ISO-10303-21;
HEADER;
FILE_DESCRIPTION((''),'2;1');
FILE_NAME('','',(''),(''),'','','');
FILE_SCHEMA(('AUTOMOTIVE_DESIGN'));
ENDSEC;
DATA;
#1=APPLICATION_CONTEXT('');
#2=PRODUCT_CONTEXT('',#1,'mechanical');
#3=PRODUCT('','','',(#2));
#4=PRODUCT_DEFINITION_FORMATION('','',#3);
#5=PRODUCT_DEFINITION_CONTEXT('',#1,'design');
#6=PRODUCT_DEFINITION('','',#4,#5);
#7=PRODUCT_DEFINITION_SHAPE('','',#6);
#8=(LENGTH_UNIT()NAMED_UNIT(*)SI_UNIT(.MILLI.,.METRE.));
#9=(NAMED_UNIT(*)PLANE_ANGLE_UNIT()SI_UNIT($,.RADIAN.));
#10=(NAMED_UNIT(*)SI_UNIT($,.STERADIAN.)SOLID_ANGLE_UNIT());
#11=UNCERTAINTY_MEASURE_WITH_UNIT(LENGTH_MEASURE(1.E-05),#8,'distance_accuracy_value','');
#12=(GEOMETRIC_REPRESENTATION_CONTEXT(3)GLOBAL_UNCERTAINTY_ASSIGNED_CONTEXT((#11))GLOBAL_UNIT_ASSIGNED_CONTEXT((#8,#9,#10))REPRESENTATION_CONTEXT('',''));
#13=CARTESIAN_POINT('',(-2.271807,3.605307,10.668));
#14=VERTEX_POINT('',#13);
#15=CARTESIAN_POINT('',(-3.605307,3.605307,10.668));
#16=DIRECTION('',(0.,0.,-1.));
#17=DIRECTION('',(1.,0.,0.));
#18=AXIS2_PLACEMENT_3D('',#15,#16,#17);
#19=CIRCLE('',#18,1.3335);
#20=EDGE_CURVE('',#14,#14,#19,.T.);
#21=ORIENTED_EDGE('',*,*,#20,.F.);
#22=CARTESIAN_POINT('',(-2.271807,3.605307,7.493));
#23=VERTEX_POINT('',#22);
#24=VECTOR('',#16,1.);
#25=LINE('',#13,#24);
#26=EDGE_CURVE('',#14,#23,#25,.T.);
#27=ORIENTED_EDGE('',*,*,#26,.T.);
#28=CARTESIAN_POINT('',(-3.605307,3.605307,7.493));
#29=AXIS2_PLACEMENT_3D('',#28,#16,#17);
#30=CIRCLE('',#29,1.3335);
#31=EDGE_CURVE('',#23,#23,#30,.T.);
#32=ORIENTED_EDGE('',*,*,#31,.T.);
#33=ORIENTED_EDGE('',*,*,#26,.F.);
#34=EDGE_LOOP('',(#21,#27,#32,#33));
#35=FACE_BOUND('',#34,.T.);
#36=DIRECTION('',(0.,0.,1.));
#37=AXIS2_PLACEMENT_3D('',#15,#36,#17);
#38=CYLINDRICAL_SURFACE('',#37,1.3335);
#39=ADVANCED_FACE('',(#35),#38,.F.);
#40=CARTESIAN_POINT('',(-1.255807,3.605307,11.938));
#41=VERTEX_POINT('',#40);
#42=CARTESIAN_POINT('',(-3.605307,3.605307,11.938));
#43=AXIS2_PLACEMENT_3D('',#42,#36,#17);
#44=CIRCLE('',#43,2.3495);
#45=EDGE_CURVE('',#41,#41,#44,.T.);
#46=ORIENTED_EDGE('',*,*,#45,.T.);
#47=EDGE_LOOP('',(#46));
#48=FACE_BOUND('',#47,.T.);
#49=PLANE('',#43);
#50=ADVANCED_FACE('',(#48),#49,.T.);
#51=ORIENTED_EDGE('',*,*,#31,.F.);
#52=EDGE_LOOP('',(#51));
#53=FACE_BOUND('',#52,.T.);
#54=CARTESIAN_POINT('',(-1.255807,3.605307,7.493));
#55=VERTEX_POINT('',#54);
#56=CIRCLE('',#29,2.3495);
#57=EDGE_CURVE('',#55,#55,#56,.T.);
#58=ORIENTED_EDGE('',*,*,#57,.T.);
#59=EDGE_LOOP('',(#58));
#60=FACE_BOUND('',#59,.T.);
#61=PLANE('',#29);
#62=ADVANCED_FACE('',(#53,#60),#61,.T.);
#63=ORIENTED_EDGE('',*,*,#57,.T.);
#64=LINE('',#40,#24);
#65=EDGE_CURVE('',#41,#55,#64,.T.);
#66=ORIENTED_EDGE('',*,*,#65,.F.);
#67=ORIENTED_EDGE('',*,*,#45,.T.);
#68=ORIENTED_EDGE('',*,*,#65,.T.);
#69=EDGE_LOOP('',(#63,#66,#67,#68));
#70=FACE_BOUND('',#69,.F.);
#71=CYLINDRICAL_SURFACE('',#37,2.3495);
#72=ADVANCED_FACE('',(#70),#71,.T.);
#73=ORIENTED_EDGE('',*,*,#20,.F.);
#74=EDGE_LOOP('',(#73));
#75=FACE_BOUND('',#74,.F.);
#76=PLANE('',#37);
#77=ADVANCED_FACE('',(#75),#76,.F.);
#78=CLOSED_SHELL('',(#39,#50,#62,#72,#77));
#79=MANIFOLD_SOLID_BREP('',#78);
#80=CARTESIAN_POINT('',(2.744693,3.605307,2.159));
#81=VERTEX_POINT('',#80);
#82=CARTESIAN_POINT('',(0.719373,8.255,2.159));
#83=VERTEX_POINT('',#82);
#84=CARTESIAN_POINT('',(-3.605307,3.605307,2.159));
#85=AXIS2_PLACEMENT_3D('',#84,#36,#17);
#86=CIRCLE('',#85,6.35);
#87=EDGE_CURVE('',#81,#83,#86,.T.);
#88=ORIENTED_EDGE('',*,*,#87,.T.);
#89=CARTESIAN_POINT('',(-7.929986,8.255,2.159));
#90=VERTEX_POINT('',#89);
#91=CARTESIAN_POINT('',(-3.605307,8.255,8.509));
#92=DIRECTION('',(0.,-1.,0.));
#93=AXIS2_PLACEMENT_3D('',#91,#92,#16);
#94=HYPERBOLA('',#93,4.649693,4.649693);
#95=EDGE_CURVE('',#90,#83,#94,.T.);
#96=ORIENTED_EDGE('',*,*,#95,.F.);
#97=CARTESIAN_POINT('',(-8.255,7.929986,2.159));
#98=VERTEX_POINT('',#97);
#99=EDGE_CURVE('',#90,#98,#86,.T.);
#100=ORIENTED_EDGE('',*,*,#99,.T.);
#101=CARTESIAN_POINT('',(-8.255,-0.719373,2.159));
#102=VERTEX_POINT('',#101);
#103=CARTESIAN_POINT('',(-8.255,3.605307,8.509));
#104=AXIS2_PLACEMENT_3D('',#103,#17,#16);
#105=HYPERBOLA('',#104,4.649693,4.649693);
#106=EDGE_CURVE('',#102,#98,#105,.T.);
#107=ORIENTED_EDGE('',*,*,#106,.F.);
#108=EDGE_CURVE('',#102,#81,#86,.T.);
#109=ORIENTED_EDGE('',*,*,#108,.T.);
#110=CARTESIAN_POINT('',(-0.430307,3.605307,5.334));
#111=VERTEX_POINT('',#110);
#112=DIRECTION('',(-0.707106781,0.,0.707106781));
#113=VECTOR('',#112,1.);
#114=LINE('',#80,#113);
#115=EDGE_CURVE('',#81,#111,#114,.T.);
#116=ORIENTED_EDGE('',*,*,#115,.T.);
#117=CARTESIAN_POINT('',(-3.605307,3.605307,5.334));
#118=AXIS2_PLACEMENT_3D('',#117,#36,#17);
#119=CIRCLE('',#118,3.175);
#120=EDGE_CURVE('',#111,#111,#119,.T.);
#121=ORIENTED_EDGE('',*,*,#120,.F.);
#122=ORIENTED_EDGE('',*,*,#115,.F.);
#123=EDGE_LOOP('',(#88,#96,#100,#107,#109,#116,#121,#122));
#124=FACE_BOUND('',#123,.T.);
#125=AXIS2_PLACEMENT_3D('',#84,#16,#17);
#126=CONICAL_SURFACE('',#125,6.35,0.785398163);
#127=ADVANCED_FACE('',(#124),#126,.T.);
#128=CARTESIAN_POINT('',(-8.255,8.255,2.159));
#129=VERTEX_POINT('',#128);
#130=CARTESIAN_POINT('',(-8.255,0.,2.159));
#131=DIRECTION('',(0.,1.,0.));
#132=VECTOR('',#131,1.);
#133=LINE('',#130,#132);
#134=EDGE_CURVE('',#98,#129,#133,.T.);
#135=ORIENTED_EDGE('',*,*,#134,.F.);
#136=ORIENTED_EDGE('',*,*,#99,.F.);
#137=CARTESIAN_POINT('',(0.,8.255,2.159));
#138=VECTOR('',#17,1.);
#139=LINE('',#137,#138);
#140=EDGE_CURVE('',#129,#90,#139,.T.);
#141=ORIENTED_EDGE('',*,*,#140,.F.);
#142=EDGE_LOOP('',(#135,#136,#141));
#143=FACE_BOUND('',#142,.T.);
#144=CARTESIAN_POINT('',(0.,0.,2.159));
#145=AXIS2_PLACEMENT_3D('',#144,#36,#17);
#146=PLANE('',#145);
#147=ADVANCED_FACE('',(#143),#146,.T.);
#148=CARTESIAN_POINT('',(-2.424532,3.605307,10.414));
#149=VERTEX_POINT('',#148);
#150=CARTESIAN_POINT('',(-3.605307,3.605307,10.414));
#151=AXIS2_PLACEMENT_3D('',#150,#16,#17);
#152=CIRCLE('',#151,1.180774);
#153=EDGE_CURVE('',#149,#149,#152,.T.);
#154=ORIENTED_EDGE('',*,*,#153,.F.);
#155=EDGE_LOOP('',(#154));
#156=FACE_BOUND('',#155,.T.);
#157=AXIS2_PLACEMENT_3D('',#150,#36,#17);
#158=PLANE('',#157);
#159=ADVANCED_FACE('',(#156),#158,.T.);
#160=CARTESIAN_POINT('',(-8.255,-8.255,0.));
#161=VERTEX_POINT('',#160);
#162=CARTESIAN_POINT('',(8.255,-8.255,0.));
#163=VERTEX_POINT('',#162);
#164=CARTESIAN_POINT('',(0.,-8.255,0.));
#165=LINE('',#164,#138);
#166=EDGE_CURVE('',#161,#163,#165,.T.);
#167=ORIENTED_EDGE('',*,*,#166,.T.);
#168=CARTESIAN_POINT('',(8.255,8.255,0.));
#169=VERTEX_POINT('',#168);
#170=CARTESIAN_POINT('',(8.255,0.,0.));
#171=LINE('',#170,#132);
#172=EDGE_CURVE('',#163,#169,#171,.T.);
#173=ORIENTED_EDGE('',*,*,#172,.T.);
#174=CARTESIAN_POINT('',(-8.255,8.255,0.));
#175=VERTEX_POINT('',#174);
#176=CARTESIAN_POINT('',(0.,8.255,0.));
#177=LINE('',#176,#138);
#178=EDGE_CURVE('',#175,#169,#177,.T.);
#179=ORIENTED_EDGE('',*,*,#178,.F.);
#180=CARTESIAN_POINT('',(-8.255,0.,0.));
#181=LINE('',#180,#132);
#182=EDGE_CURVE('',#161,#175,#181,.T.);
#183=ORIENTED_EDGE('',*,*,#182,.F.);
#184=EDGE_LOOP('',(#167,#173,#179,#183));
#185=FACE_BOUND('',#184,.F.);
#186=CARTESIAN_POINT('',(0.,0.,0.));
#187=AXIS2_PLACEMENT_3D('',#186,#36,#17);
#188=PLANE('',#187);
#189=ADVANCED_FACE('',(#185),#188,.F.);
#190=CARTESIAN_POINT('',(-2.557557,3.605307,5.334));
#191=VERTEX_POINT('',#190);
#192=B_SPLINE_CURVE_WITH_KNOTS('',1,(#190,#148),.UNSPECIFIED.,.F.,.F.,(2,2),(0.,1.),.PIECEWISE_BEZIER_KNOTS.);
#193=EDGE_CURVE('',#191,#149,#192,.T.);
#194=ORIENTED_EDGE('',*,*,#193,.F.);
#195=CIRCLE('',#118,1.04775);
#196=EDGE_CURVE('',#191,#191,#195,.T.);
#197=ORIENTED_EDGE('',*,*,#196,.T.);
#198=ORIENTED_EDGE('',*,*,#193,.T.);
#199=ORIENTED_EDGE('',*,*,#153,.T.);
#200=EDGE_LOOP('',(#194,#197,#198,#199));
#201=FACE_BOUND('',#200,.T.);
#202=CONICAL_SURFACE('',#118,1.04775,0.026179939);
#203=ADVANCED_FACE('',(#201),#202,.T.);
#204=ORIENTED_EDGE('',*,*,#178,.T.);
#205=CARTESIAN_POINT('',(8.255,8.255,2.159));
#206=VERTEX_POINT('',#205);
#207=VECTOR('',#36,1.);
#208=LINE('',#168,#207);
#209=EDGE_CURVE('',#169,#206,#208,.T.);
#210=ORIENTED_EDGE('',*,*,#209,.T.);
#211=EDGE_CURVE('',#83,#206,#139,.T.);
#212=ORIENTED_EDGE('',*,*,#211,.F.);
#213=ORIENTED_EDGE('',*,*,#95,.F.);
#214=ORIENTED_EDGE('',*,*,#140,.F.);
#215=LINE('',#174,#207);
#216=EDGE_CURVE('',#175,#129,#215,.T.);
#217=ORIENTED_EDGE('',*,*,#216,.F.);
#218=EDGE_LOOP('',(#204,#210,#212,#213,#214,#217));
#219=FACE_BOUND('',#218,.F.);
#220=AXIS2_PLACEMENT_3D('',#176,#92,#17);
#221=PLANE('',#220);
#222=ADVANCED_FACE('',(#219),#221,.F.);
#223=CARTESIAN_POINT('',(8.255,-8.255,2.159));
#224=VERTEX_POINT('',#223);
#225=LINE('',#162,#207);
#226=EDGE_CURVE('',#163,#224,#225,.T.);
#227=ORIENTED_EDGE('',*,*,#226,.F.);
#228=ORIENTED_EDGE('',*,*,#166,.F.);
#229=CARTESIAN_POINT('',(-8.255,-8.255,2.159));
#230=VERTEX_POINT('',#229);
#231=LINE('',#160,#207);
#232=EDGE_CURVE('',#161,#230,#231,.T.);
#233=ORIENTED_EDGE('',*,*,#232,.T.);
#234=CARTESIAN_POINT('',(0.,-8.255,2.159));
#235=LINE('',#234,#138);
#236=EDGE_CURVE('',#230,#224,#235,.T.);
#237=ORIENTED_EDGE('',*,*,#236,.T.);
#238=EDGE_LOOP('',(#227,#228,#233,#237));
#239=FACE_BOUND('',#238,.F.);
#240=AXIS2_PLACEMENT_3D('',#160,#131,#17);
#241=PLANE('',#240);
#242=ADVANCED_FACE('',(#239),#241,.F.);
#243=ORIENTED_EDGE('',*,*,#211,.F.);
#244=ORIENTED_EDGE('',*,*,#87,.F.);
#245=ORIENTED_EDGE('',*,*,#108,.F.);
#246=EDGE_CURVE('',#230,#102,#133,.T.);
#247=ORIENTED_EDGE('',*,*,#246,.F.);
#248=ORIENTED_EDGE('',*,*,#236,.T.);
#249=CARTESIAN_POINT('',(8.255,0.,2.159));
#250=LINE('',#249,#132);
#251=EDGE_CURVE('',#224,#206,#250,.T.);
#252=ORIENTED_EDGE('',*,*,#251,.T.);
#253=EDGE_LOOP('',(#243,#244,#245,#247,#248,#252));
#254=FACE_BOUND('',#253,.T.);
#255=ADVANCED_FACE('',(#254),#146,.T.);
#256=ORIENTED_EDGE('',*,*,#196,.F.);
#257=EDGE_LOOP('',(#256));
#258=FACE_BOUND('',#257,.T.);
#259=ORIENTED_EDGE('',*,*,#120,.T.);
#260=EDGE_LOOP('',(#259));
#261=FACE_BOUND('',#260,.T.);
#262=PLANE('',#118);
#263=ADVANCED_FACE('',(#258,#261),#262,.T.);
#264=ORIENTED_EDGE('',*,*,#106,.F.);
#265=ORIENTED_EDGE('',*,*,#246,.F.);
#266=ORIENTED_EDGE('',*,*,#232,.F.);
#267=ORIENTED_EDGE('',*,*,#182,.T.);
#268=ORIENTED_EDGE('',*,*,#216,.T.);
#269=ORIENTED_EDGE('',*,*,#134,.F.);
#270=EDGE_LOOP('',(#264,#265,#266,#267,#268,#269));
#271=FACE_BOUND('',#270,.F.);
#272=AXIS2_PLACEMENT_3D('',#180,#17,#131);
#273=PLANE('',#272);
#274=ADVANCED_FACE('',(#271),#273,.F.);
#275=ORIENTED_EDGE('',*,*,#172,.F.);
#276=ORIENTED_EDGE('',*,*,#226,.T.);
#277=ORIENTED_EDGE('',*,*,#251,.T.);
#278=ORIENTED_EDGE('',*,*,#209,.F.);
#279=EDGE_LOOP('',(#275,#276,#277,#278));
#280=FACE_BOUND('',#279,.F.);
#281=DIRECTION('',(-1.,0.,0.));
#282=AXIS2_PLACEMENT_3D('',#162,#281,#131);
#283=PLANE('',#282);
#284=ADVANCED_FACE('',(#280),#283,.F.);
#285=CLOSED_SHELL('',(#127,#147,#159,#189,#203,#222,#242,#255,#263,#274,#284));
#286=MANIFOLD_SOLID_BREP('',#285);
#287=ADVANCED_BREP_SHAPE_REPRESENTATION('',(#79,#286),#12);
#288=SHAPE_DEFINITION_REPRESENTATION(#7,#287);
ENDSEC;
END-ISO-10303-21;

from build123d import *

# Parameters (mm, degrees)
F0_W          = 16.51
F0_H          = 16.51
F1_DEPTH      = 2.159
F2_R          = 3.175
F3_DEPTH      = 3.175
F3_DEPTH_BACK = 1.27
F4_R          = 1.04775
F5_DEPTH      = 5.08
F5_TAPER      = -1.5
F8_R          = 2.3495
F9_DEPTH      = 1.27
F10_R         = 2.3495
F10_R_2       = 1.3335
F11_DEPTH     = 3.175


# Not quite as in the source:
# - a fillet or chamfer that OpenCascade refuses, or shapes differently, is made with other operations: its cross-section is extruded or revolved along the edge and cut away or added


with BuildPart() as f1:
    # F0 (on Top) → F1 (new body)
    with BuildSketch(Plane.XY):
        Rectangle(F0_W, F0_H)
    extrude(amount=F1_DEPTH)

    # F2 (on face) → F3 (join, two sides)
    with BuildSketch(Plane.XY.offset(2.159)) as f3_sk:
        with Locations((-3.605306847, 3.605306847)):
            Circle(F2_R)
    extrude(amount=F3_DEPTH)
    extrude(f3_sk.sketch, amount=-F3_DEPTH_BACK)

    # F4 (on face) → F5 (join)
    with BuildSketch(Plane.XY.offset(5.334)):
        with Locations((-3.605306847, 3.605306847)):
            Circle(F4_R)
    extrude(amount=F5_DEPTH, taper=F5_TAPER)

    # F12: chamfer of 3.175 on 1 edges, made by hand


with BuildPart() as f9:
    # F8 (on offset) → F9 (new body)
    with BuildSketch(Plane.XY.offset(10.668)):
        with Locations((-3.605306847, 3.605306847)):
            Circle(F8_R)
    extrude(amount=F9_DEPTH)

    # F10 (on face) → F11 (join)
    with BuildSketch(Plane(origin=(0, 0, 10.668), x_dir=(1, 0, 0), z_dir=(0, 0, -1))):
        with Locations((-3.605306847, -3.605306847)):
            Circle(F10_R)
        with Locations((-3.605306847, -3.605306847)):
            Circle(F10_R_2, mode=Mode.SUBTRACT)
    extrude(amount=F11_DEPTH)


with BuildPart() as f12_tool2:
    # F12_s3 → F12_t4 (revolve)
    with BuildSketch(Plane.XZ.offset(-3.605306847)):
        Polygon((2.744693153, 2.159), (-0.430306847, 5.334), (-0.430306847, 2.159), align=None)
    revolve(axis=Axis((-3.605306847, 3.605306847, 2.159), (0, 0, 1)))

    split(bisect_by=Plane.XZ.offset(-8.255), keep=Keep.TOP)

    split(bisect_by=Plane.YZ.offset(-8.255), keep=Keep.TOP)

    split(bisect_by=Plane.XY.offset(5.334), keep=Keep.BOTTOM)


with BuildPart() as f1_1:
    add(f1.part)

    # F12_t1: union F12_tool2
    add(f12_tool2.part)


solid = Compound([f9.part, f1_1.part])
